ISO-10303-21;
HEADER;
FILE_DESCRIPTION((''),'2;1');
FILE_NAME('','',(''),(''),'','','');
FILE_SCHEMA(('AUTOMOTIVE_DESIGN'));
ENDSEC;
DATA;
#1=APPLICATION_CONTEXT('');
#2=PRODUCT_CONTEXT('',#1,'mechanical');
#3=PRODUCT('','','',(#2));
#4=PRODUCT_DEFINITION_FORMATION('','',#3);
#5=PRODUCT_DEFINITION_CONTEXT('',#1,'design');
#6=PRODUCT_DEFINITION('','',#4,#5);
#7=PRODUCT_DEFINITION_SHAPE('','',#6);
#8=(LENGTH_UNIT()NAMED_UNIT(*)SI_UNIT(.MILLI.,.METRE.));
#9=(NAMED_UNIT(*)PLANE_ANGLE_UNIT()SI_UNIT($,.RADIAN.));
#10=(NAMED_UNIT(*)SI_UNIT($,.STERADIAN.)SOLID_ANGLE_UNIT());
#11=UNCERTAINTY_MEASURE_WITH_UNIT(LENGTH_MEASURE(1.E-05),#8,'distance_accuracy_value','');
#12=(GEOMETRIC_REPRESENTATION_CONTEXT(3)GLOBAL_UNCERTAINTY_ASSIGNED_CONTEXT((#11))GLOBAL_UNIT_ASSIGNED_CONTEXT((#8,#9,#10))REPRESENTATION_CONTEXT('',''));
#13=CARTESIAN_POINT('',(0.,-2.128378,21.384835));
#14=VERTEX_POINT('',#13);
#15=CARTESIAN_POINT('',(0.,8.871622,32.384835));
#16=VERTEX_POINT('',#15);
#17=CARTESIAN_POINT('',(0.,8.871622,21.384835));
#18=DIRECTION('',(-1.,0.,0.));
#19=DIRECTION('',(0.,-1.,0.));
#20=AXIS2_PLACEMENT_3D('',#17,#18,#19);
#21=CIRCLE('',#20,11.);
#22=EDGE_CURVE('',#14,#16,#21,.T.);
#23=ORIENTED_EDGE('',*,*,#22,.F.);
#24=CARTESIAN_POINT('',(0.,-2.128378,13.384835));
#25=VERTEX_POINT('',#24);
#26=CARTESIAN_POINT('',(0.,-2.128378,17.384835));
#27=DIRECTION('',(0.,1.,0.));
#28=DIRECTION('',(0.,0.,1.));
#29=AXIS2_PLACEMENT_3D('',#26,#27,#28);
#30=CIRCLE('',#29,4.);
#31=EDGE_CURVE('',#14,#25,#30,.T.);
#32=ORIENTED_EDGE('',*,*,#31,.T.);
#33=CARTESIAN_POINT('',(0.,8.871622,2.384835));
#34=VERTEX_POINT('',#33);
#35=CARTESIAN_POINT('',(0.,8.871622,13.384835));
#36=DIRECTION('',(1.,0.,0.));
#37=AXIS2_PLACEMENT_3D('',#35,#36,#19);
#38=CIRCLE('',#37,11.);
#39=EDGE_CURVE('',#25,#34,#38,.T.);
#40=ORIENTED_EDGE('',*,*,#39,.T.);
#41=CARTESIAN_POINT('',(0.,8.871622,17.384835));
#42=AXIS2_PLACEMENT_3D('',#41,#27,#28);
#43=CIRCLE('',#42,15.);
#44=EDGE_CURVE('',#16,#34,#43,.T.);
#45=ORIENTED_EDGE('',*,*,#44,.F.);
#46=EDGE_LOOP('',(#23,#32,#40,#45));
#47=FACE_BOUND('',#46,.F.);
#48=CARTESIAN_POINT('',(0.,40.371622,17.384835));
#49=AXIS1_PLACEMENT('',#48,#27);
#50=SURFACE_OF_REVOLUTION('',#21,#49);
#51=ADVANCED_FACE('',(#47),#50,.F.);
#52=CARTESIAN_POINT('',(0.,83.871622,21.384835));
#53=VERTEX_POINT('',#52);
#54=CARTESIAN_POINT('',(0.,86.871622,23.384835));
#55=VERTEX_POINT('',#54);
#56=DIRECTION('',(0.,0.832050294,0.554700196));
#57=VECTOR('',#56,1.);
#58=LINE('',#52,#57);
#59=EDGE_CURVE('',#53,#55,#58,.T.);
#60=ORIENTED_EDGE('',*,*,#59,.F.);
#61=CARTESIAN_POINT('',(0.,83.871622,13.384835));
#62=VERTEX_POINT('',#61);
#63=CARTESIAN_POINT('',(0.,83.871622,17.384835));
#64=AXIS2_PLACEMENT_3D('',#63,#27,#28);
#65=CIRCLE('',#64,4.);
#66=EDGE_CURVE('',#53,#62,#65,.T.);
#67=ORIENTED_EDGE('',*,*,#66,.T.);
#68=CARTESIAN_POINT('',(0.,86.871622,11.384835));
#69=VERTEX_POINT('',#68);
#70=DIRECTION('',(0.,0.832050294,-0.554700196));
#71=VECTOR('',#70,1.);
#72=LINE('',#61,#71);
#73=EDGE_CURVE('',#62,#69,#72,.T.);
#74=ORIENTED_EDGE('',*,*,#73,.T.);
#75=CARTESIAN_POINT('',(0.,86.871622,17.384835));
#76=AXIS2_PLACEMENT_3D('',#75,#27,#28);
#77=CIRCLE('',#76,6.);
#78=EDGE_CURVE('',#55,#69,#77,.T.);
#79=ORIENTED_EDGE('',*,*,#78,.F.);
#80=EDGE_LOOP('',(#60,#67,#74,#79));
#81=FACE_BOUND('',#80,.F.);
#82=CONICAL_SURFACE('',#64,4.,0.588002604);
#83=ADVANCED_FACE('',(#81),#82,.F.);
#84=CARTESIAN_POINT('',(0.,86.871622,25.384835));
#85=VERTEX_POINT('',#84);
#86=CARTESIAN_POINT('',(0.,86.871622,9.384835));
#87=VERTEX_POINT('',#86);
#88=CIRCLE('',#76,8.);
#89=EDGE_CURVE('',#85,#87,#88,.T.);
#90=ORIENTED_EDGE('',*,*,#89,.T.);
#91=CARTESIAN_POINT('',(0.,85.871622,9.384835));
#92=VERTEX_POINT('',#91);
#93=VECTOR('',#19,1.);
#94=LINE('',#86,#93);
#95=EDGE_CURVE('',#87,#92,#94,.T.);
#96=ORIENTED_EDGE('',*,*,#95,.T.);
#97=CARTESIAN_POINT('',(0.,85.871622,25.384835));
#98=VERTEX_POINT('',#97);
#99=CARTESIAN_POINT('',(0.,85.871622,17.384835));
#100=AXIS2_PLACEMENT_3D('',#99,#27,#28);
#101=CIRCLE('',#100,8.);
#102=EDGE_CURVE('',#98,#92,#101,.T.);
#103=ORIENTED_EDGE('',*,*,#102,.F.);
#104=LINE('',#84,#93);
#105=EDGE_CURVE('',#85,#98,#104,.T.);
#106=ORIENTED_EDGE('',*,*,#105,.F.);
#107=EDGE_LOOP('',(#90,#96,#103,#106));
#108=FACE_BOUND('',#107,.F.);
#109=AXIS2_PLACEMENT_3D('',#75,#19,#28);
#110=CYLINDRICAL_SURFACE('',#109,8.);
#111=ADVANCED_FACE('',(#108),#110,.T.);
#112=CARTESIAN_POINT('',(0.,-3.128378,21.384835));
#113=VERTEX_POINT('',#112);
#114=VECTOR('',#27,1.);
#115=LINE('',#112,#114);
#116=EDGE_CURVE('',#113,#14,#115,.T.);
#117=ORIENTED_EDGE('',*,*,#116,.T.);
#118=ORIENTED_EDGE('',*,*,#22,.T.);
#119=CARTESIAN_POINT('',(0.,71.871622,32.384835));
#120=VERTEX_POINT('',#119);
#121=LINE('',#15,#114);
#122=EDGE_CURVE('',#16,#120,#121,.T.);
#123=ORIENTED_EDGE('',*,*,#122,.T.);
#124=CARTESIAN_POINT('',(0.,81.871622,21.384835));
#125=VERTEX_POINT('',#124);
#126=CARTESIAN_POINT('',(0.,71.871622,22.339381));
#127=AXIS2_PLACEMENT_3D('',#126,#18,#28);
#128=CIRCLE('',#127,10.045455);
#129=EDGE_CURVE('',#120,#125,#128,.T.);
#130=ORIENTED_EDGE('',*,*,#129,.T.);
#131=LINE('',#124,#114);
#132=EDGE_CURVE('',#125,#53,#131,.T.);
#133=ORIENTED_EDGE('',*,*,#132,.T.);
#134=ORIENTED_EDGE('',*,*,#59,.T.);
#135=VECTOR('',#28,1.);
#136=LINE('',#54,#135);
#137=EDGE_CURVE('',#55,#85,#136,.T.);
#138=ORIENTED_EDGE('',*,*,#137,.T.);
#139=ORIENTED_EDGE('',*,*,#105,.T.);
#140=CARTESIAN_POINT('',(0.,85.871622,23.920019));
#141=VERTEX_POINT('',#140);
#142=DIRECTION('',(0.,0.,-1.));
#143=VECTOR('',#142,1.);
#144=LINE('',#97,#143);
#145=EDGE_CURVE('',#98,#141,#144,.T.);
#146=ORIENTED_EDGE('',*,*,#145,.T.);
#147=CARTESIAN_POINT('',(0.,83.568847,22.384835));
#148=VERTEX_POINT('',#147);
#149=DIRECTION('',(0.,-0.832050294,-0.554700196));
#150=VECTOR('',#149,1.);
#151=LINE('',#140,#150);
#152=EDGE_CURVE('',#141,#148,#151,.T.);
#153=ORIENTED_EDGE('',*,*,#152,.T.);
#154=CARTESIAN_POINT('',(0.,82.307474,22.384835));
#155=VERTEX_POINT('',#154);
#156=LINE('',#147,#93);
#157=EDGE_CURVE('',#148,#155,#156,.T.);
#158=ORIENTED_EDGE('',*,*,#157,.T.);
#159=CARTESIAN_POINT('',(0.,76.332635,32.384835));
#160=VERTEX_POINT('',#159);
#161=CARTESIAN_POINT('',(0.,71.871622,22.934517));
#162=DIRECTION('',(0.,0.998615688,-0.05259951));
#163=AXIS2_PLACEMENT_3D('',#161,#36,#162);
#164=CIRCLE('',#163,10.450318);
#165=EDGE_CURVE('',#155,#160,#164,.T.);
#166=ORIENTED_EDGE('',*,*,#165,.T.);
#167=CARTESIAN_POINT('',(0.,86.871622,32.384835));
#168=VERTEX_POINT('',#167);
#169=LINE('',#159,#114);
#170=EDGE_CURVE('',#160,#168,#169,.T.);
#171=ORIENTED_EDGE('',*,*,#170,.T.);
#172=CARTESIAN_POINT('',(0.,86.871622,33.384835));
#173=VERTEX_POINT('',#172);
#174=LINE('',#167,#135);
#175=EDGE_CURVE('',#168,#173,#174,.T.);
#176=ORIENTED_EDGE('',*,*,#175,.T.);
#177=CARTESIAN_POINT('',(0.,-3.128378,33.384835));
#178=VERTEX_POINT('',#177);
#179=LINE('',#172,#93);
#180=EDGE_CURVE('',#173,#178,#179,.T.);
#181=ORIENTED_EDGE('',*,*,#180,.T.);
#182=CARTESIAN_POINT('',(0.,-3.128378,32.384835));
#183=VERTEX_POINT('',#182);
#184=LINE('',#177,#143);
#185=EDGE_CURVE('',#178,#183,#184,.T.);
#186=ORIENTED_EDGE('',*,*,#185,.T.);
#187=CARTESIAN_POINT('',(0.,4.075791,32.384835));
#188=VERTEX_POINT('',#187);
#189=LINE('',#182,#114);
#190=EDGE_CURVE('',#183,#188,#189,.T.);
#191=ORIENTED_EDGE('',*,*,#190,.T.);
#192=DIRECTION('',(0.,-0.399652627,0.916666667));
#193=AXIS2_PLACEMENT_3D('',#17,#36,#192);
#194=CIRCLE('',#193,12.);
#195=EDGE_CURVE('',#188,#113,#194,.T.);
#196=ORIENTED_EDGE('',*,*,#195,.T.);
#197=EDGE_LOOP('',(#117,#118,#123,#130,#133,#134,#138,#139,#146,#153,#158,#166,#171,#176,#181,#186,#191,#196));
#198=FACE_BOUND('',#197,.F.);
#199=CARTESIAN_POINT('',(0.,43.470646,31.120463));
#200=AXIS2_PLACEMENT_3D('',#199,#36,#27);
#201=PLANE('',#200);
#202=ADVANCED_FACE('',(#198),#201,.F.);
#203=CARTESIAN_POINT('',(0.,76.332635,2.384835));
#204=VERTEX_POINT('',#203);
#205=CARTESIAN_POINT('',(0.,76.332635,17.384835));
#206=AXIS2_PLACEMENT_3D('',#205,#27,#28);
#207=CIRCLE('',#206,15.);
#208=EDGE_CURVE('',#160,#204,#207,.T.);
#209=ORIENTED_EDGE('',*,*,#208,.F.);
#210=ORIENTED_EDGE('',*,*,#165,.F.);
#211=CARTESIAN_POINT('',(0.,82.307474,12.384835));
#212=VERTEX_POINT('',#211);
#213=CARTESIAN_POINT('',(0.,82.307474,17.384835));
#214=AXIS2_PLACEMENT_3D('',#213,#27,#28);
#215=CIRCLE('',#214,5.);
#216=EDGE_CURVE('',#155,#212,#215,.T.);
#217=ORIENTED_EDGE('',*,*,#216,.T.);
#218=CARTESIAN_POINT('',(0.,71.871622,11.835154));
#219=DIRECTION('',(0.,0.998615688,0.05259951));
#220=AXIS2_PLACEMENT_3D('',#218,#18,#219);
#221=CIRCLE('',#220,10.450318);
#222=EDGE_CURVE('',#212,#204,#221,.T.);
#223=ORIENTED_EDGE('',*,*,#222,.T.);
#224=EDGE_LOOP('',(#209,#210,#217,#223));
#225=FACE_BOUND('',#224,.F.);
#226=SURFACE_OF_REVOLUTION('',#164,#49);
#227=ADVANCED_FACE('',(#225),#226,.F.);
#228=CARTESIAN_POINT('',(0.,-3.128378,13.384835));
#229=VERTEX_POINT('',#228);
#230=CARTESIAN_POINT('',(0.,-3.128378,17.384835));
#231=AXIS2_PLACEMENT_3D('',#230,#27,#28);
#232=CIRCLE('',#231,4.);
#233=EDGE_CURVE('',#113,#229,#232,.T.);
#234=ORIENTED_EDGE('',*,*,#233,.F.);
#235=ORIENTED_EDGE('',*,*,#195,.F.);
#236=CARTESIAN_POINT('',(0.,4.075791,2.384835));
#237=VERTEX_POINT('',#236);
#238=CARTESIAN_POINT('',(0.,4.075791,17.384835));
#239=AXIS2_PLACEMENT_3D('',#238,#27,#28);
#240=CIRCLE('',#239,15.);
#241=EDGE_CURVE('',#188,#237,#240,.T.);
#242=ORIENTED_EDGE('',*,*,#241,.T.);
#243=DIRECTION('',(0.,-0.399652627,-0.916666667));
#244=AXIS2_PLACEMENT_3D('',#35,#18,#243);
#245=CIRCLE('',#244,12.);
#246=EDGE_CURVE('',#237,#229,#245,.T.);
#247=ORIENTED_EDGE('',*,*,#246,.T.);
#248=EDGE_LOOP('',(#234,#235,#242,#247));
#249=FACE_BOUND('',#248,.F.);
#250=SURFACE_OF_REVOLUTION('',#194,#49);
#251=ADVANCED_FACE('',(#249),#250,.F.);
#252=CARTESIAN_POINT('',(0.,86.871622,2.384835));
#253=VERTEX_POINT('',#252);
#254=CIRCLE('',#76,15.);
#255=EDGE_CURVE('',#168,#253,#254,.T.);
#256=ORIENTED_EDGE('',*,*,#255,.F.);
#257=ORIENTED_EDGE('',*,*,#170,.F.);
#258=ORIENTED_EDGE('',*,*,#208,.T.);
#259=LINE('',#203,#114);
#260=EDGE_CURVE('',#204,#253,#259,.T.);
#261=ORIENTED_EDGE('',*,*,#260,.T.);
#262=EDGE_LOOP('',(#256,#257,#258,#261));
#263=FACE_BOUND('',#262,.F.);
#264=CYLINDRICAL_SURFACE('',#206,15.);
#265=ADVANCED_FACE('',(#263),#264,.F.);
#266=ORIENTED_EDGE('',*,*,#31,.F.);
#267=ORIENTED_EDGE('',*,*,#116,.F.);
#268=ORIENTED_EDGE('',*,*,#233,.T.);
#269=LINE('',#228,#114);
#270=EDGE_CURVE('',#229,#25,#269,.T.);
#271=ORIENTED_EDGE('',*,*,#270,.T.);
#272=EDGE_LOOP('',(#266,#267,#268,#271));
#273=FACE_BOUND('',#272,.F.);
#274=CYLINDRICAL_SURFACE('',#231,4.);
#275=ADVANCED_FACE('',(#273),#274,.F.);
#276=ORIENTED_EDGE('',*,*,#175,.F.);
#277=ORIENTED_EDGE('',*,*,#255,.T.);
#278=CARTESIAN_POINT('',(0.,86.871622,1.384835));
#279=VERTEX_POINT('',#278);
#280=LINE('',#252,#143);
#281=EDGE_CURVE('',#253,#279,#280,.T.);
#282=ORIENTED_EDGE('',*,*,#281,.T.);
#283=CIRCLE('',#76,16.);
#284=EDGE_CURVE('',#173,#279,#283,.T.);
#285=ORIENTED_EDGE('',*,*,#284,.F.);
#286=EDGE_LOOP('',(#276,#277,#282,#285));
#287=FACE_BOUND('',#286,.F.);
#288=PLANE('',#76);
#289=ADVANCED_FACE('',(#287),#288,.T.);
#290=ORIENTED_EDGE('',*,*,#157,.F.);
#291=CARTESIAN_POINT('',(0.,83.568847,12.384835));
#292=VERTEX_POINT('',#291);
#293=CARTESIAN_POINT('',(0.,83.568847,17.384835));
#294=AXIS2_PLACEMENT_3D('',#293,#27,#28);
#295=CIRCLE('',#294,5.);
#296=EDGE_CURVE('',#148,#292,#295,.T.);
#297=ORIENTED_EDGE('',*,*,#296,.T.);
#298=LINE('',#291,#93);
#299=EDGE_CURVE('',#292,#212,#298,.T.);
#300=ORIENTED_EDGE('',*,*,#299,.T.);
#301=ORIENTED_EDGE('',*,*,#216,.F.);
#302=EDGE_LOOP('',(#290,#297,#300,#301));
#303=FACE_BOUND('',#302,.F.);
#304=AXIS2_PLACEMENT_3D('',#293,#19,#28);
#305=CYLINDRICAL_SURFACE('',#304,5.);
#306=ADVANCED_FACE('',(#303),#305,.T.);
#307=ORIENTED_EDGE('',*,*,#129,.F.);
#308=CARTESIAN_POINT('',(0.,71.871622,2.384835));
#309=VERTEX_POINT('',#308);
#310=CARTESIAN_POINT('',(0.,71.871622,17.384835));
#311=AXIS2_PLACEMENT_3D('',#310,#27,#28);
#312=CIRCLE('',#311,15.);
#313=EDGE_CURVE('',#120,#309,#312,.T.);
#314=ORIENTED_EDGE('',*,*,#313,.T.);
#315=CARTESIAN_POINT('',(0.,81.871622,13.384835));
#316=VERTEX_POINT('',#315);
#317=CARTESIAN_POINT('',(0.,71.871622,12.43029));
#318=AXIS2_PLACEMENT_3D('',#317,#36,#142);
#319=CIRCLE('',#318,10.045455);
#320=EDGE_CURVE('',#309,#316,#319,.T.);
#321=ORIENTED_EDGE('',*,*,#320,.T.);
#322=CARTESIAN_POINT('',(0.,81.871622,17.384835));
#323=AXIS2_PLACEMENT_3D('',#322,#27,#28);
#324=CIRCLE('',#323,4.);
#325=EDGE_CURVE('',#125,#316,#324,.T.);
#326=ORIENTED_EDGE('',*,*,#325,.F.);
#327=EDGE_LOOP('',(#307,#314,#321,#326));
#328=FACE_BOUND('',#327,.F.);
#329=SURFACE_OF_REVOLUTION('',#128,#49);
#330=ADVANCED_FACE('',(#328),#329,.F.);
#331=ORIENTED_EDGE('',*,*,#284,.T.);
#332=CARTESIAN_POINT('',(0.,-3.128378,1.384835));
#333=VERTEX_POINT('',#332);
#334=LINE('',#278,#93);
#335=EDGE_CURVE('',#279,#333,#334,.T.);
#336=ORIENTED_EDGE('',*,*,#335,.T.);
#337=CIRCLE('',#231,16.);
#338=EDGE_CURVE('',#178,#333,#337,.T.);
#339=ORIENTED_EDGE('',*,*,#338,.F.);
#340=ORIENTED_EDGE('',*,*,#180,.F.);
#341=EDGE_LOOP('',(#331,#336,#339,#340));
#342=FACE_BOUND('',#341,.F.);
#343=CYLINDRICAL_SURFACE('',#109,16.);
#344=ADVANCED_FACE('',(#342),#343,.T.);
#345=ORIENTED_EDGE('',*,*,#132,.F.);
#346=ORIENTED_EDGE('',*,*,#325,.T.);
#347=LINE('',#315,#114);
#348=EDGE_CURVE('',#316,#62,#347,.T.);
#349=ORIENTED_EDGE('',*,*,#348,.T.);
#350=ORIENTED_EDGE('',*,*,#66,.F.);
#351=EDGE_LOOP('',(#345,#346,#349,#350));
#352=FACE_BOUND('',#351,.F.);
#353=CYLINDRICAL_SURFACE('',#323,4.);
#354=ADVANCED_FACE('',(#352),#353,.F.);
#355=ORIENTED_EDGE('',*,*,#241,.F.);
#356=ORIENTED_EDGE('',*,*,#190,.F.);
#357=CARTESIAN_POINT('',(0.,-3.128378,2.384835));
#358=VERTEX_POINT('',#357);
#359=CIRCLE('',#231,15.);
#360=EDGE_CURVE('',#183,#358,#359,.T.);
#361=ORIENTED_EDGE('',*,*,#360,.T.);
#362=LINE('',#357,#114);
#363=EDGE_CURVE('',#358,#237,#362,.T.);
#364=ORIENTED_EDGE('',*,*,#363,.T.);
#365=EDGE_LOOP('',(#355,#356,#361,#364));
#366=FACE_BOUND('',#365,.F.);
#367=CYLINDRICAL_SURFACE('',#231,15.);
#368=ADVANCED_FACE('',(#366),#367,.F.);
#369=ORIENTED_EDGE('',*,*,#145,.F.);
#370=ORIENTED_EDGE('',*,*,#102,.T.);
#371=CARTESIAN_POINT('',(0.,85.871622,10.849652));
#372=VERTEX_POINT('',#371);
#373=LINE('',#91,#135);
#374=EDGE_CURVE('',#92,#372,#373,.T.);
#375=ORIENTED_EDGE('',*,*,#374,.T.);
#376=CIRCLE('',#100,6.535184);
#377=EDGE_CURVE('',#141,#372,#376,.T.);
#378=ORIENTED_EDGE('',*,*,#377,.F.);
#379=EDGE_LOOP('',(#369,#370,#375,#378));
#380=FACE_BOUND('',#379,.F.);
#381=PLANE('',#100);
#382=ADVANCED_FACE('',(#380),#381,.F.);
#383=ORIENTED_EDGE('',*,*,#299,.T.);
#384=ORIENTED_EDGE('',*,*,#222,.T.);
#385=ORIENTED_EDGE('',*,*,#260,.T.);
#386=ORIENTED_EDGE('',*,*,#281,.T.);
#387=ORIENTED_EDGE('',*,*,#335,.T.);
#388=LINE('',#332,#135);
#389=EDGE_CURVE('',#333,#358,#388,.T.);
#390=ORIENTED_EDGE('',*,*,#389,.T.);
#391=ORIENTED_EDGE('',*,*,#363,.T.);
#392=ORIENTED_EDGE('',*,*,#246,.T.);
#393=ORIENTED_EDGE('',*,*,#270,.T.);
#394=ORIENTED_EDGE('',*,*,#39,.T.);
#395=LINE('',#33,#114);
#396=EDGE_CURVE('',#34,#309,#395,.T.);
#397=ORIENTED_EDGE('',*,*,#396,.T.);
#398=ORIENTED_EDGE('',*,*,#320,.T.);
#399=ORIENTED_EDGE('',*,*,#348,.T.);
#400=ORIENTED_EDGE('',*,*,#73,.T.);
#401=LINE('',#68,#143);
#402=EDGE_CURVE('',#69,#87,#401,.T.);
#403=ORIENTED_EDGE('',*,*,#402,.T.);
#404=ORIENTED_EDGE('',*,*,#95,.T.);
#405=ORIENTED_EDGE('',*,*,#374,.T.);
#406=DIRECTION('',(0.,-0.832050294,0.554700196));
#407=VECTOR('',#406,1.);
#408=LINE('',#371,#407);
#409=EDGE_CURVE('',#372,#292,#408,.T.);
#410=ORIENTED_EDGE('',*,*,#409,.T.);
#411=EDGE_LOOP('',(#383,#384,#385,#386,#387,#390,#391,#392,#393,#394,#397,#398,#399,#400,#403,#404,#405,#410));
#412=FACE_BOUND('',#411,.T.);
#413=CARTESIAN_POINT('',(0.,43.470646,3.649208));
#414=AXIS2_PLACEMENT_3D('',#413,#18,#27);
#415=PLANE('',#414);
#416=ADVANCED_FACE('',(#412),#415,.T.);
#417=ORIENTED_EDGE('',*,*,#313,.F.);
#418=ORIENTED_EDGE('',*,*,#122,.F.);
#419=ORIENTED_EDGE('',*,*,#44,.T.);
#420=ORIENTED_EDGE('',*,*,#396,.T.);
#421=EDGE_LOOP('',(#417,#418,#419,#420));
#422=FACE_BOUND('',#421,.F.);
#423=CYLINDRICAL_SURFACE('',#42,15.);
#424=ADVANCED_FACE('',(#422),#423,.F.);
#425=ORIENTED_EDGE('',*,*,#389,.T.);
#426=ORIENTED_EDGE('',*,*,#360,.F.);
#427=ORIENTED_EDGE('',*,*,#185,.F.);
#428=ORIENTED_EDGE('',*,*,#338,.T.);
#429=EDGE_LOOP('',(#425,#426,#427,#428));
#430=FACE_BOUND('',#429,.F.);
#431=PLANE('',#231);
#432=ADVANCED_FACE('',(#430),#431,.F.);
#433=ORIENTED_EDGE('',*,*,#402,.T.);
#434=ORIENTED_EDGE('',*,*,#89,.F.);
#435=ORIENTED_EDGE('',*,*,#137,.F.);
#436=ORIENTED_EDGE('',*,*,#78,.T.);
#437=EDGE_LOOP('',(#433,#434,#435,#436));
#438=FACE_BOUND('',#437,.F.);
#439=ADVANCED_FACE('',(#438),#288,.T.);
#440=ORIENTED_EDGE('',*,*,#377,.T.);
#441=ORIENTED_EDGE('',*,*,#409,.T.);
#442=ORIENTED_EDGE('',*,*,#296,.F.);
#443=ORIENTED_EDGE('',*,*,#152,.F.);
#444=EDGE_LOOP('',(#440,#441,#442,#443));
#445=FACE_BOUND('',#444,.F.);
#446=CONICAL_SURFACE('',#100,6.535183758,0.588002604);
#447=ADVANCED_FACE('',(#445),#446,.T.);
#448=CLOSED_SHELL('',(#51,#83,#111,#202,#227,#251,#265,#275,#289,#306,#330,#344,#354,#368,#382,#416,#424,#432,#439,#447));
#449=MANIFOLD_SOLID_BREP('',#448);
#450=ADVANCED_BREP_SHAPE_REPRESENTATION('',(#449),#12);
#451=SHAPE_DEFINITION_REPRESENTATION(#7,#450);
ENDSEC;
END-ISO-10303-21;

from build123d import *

# Parameters (mm, degrees)
F1_ANGLE = 180


# Not quite as in the source:
# - a feature names something its author has since deleted; it is built from what else it names


with BuildPart() as f1:
    # F0 (on Right) → F1 (revolve)
    with BuildSketch(Plane.YZ):
        with BuildLine():
            Line((86.8716222048, 33.384835436), (-3.1283777952, 33.384835436))
            Line((-3.1283777952, 33.384835436), (-3.1283777952, 32.384835436))
            Line((-3.1283777952, 32.384835436), (4.0757906815, 32.384835436))
            ThreePointArc((4.0757906815, 32.384835436), (-1.1670524657, 27.9594084914), (-3.1283777952, 21.384835436))
            Line((-3.1283777952, 21.384835436), (-2.1283777952, 21.384835436))
            ThreePointArc((-2.1283777952, 21.384835436), (1.0934476117, 29.1630100291), (8.8716222048, 32.384835436))
            Line((8.8716222048, 32.384835436), (71.8716222048, 32.384835436))
            ThreePointArc((71.8716222048, 32.384835436), (79.3046565784, 29.0966848666), (81.8716222048, 21.384835436))
            Line((81.8716222048, 21.384835436), (83.8716222048, 21.384835436))
            Line((83.8716222048, 21.384835436), (86.8716222048, 23.384835436))
            Line((86.8716222048, 23.384835436), (86.8716222048, 25.384835436))
            Line((86.8716222048, 25.384835436), (85.8716222048, 25.384835436))
            Line((85.8716222048, 25.384835436), (85.8716222048, 23.9200191945))
            Line((85.8716222048, 23.9200191945), (83.568846567, 22.384835436))
            Line((83.568846567, 22.384835436), (82.3074740727, 22.384835436))
            ThreePointArc((82.3074740727, 22.384835436), (80.8426391774, 28.2945551763), (76.3326351779, 32.384835436))
            Line((76.3326351779, 32.384835436), (86.8716222048, 32.384835436))
            Line((86.8716222048, 32.384835436), (86.8716222048, 33.384835436))
        make_face()
    revolve(axis=Axis((0, 40.3716222048, 17.384835436), (0, 1, 0)), revolution_arc=F1_ANGLE)


solid = f1.part
